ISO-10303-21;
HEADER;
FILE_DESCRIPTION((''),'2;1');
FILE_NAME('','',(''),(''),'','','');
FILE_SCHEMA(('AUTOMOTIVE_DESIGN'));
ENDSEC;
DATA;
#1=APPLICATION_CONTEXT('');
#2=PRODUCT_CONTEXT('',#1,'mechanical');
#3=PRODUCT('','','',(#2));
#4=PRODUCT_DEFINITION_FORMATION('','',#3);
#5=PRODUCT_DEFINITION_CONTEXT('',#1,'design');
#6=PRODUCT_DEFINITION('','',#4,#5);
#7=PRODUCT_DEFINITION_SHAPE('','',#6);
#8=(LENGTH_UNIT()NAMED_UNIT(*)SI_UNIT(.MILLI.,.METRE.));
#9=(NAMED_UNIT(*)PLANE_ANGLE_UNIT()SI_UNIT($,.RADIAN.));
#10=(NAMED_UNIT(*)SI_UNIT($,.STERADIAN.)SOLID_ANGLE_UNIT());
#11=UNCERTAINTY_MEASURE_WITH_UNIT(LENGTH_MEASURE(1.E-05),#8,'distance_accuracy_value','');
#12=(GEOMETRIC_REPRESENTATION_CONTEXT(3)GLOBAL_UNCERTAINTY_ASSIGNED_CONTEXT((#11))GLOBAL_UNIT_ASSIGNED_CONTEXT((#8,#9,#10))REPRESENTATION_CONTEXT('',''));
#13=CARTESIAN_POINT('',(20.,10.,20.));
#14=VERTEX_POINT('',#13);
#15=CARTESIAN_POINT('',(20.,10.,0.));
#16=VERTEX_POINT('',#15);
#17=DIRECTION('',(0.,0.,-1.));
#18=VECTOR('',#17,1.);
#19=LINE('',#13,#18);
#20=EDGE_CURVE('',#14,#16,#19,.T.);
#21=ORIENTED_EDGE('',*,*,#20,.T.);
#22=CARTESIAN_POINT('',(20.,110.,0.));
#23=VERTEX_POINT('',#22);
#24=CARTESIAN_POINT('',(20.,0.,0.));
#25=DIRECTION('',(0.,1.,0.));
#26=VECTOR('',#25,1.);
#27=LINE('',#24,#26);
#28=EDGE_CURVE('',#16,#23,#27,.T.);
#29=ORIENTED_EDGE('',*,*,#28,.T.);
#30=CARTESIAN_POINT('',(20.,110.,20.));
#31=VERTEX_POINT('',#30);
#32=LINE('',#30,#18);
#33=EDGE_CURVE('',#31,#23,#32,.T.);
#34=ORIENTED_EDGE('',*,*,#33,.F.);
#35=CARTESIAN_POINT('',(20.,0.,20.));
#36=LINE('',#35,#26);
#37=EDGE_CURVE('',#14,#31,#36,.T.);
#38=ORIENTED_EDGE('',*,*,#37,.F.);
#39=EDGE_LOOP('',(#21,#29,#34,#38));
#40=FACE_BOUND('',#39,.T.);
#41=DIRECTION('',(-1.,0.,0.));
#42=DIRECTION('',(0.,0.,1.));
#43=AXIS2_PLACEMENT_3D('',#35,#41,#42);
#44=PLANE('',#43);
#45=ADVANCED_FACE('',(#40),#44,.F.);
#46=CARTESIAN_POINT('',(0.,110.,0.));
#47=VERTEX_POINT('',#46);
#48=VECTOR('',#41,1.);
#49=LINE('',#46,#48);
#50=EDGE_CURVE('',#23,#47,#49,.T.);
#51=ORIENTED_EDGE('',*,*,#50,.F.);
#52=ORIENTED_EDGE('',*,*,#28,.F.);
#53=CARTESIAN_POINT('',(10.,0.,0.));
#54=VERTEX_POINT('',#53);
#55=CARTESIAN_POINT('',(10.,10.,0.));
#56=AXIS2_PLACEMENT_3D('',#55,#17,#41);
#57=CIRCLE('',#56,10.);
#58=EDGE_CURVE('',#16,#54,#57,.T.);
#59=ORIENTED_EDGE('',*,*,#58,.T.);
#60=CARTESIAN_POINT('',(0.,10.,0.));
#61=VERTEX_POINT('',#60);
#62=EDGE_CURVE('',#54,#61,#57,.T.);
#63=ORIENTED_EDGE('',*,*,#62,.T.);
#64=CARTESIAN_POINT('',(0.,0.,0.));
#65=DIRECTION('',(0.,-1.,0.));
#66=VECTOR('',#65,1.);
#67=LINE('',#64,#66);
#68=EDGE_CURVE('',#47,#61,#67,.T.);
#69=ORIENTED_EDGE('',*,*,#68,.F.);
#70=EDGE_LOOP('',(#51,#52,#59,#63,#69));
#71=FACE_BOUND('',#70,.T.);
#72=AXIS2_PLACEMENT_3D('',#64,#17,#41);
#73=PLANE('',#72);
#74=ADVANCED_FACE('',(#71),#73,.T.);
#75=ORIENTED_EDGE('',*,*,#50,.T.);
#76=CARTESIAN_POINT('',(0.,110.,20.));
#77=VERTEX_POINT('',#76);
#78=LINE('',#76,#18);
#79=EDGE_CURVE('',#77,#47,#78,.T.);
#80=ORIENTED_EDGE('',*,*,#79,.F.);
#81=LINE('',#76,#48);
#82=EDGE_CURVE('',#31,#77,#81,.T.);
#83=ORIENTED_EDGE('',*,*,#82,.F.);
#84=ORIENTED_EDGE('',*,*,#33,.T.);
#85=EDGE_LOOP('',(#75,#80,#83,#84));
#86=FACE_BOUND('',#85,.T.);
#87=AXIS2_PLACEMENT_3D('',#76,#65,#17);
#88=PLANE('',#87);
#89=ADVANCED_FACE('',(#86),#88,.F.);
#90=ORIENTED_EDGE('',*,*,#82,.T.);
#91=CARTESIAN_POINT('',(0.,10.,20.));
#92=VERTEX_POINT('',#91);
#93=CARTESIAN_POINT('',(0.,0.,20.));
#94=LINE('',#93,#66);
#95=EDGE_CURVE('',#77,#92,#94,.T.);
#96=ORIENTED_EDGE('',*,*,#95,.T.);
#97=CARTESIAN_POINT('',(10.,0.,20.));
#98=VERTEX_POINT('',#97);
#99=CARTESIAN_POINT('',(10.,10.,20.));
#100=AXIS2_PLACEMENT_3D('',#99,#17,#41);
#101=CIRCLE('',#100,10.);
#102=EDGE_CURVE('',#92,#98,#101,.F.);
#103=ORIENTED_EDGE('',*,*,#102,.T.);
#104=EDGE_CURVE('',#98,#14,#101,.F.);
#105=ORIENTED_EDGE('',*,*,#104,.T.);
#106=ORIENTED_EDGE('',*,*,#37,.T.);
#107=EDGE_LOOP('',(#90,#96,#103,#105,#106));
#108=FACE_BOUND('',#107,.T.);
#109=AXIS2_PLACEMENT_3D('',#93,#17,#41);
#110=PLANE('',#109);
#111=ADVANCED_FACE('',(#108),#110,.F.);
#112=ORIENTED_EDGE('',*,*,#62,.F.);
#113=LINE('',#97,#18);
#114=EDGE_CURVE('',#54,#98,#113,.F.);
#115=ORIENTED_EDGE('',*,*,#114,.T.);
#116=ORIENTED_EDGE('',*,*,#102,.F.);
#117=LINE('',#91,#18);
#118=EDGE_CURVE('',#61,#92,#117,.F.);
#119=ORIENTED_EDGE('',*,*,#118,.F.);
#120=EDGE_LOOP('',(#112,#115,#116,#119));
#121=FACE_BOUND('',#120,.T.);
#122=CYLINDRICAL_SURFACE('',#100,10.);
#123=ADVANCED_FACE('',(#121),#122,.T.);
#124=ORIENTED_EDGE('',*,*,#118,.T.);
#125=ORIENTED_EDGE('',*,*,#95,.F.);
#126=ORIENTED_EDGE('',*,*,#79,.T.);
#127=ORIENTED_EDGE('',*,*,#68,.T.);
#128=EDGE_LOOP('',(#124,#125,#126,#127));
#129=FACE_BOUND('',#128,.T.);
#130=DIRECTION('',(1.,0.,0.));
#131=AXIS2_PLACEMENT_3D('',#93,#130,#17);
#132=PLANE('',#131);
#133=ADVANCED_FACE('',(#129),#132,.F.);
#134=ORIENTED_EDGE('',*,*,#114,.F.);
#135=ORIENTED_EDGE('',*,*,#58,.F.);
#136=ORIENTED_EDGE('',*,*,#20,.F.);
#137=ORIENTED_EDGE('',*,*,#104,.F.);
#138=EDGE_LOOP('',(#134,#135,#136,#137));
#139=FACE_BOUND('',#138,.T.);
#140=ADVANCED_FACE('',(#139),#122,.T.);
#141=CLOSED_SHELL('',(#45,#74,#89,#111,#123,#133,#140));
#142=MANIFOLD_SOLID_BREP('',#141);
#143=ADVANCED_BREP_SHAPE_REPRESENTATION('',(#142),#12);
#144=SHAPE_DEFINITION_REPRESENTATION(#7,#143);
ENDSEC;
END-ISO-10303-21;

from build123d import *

# Parameters (mm, degrees)
ESQUISSE1_W        = 20
ESQUISSE1_H        = 110
BOSS_EXTRU_1_DEPTH = 20
CONG_3_R           = 10


with BuildPart() as part:
    # Esquisse1 → Boss.-Extru.1 (new body)
    with BuildSketch(Plane.XY):
        with Locations((10, 55)):
            Rectangle(ESQUISSE1_W, ESQUISSE1_H)
    extrude(amount=BOSS_EXTRU_1_DEPTH)

    # Congé3
    cong_3_edges = [part.edges().sort_by_distance(p)[0] for p in [
        (0, 0, 10),
        (20, 0, 10),
    ]]
    fillet(cong_3_edges, radius=CONG_3_R - 0.0001)  # a hair under: the kernel refuses the full size


solid = part.part
